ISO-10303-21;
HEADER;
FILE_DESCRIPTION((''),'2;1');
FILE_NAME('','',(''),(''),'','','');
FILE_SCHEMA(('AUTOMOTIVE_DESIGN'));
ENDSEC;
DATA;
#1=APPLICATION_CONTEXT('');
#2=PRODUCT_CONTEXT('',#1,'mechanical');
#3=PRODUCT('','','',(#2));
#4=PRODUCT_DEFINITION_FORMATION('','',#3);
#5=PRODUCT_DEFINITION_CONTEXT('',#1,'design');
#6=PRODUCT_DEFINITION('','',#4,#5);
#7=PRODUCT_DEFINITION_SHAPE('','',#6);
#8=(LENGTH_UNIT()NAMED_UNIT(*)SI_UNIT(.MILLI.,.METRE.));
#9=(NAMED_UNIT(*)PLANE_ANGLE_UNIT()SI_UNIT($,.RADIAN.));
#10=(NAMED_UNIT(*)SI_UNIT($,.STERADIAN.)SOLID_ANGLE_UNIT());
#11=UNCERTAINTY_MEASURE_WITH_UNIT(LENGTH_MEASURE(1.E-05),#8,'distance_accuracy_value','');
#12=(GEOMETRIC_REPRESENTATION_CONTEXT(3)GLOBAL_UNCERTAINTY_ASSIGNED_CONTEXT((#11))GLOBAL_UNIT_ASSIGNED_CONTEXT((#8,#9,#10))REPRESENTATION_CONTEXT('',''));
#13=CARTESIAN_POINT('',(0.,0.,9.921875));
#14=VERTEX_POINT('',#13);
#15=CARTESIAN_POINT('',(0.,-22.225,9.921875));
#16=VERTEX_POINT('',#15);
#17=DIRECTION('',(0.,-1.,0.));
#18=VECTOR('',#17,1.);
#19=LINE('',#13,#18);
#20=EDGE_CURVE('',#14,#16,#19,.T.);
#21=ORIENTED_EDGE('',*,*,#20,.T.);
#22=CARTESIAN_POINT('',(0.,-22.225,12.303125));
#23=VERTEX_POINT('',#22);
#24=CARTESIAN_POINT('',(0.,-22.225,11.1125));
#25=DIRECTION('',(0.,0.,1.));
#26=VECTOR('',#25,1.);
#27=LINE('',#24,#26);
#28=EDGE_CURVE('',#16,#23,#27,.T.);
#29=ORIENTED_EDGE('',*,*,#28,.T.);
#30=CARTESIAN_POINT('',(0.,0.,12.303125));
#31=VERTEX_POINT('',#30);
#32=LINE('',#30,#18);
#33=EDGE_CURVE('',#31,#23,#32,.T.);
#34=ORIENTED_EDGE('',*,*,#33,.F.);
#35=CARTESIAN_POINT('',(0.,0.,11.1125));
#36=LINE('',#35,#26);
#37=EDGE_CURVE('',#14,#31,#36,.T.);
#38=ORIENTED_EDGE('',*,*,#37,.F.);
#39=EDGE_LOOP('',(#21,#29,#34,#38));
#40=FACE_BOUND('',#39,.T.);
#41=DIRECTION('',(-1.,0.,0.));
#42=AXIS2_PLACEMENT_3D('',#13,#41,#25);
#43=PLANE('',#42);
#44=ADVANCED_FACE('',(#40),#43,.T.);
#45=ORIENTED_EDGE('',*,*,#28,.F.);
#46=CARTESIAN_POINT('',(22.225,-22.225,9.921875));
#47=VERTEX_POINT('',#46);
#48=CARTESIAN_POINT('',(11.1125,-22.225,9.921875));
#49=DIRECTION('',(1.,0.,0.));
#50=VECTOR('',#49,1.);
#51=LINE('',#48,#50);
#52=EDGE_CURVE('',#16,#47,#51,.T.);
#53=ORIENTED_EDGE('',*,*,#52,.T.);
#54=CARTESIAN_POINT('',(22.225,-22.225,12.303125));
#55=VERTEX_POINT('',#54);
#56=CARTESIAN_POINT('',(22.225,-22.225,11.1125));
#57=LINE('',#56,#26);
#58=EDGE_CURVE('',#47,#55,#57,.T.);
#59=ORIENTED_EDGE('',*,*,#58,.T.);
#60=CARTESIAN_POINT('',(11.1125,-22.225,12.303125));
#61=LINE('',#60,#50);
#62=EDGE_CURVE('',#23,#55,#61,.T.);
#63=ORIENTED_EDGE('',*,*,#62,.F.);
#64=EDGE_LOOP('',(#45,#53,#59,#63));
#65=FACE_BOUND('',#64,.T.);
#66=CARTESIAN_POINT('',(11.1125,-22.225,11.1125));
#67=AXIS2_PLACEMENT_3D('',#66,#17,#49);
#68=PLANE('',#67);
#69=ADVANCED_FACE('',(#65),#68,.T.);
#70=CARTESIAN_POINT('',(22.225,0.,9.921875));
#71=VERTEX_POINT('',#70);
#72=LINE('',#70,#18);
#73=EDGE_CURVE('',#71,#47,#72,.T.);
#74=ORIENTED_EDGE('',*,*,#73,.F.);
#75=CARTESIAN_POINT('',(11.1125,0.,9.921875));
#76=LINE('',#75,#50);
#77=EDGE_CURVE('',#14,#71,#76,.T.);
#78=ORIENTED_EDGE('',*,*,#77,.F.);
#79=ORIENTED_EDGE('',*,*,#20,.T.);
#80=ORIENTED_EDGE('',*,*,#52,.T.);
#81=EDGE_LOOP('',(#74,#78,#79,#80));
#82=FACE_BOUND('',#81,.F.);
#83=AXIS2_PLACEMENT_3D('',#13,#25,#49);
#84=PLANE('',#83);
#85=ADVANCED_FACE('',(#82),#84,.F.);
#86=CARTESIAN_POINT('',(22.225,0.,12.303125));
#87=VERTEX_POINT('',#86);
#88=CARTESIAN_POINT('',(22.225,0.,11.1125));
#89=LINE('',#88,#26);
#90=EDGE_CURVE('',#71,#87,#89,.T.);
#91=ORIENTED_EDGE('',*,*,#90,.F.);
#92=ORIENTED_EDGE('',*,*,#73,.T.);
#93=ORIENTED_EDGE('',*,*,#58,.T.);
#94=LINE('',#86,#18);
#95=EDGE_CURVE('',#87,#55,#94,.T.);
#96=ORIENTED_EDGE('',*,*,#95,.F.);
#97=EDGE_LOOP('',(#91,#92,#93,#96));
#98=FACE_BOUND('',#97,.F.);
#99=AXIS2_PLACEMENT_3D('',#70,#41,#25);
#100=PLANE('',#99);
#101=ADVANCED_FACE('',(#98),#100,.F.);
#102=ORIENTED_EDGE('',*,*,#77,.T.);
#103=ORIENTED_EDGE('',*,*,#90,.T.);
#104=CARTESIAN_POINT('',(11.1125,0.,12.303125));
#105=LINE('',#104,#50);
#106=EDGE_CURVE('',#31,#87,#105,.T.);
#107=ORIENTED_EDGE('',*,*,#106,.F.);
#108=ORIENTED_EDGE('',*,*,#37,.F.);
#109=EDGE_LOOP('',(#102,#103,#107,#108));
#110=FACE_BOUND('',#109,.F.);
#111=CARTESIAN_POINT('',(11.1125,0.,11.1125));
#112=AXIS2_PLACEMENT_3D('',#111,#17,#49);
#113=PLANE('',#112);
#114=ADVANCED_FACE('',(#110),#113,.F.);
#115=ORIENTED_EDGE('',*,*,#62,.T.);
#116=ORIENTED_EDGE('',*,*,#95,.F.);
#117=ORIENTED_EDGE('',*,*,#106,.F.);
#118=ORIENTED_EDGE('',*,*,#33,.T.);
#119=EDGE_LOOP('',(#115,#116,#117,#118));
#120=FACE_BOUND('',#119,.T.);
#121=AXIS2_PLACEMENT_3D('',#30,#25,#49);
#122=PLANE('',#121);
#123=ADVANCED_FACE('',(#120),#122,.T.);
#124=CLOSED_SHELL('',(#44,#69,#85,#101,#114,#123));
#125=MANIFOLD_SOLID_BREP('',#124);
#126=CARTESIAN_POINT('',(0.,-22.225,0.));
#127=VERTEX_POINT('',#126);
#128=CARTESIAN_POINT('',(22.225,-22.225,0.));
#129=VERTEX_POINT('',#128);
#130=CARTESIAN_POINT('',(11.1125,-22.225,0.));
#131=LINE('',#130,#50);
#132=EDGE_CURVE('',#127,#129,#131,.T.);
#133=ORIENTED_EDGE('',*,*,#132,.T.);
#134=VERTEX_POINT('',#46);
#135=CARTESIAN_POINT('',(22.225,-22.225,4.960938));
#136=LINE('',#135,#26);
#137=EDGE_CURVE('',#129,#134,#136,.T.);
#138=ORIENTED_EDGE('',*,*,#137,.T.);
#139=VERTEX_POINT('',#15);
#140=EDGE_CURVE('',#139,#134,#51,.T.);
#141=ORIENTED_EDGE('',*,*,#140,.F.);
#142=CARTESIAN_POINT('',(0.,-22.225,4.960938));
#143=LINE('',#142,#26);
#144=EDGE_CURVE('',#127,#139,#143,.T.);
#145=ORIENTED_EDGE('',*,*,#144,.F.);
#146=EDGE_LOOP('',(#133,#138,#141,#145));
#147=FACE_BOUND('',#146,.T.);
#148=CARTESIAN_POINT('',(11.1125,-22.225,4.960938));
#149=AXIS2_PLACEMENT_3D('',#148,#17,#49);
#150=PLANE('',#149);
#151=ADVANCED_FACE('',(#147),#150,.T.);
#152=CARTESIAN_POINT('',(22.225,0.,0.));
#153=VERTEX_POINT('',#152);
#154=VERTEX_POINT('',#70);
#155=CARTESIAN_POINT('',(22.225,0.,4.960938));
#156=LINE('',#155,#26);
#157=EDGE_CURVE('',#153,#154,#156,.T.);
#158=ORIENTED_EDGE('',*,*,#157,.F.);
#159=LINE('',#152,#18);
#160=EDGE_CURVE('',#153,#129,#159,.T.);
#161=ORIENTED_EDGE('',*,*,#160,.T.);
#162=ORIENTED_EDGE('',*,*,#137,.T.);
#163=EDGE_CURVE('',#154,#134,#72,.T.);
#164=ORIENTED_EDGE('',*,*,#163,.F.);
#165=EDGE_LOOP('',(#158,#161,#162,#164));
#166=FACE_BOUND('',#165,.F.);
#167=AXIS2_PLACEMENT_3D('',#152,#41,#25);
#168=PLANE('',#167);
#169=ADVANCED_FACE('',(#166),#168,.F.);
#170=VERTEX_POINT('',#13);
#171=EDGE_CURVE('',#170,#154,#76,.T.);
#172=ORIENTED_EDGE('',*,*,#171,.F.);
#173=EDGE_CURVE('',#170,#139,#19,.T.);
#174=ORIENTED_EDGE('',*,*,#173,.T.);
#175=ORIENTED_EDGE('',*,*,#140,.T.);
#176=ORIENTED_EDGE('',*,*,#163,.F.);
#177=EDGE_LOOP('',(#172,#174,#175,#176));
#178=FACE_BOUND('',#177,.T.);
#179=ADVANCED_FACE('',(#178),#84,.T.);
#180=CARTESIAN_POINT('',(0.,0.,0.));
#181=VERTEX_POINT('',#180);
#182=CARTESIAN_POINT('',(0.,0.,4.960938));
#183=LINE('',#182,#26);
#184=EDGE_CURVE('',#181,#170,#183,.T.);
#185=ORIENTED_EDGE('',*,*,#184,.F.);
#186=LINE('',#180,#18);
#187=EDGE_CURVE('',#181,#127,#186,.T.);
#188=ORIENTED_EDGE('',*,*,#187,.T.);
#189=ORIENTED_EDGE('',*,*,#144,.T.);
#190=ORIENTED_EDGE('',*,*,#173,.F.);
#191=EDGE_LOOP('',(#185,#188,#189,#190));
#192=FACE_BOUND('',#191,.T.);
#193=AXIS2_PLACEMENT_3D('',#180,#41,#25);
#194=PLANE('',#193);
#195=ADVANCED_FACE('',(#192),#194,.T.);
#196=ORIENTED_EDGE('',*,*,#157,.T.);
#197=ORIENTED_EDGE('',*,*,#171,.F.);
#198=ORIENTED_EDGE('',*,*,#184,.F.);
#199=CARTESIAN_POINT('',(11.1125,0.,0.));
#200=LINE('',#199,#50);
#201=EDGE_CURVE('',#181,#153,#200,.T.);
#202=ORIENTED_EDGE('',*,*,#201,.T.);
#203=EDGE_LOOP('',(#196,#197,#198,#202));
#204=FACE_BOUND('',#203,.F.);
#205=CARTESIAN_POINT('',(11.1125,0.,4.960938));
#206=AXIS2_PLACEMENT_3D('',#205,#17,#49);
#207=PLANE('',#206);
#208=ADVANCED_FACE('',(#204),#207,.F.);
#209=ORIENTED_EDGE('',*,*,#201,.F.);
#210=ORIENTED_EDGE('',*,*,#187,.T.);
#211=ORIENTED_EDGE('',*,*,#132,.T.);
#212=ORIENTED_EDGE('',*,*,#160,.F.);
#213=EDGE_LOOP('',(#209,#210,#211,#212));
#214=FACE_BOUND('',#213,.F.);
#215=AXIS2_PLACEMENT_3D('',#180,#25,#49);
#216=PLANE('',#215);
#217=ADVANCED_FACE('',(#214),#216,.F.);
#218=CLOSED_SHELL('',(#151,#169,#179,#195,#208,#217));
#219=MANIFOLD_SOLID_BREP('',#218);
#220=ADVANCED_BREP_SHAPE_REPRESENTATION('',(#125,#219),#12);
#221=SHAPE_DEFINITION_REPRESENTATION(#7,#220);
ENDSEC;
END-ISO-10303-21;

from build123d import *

# Parameters (mm, degrees)
F0_W     = 22.225
F0_H     = 9.921875
F1_DEPTH = 22.225
F2_W     = 22.225
F2_H     = 2.38125
F3_DEPTH = 22.225


# Not quite as in the source:
# - a length typed as a fraction of an inch, garbled in the dataset ("3 / 203.2 mm" for 3/8 in), is restored
# - a feature names something its author has since deleted; it is built from what else it names


with BuildPart() as f1:
    # F0 (on Front) → F1 (new body)
    with BuildSketch(Plane.XZ):
        with Locations((11.1125, 4.9609375)):
            Rectangle(F0_W, F0_H)
    extrude(amount=F1_DEPTH)


with BuildPart() as f3:
    # F2 (on Front) → F3 (new body)
    with BuildSketch(Plane.XZ):
        with Locations((11.1125, 11.1125)):
            Rectangle(F2_W, F2_H)
    extrude(amount=F3_DEPTH)


solid = Compound([f1.part, f3.part])
